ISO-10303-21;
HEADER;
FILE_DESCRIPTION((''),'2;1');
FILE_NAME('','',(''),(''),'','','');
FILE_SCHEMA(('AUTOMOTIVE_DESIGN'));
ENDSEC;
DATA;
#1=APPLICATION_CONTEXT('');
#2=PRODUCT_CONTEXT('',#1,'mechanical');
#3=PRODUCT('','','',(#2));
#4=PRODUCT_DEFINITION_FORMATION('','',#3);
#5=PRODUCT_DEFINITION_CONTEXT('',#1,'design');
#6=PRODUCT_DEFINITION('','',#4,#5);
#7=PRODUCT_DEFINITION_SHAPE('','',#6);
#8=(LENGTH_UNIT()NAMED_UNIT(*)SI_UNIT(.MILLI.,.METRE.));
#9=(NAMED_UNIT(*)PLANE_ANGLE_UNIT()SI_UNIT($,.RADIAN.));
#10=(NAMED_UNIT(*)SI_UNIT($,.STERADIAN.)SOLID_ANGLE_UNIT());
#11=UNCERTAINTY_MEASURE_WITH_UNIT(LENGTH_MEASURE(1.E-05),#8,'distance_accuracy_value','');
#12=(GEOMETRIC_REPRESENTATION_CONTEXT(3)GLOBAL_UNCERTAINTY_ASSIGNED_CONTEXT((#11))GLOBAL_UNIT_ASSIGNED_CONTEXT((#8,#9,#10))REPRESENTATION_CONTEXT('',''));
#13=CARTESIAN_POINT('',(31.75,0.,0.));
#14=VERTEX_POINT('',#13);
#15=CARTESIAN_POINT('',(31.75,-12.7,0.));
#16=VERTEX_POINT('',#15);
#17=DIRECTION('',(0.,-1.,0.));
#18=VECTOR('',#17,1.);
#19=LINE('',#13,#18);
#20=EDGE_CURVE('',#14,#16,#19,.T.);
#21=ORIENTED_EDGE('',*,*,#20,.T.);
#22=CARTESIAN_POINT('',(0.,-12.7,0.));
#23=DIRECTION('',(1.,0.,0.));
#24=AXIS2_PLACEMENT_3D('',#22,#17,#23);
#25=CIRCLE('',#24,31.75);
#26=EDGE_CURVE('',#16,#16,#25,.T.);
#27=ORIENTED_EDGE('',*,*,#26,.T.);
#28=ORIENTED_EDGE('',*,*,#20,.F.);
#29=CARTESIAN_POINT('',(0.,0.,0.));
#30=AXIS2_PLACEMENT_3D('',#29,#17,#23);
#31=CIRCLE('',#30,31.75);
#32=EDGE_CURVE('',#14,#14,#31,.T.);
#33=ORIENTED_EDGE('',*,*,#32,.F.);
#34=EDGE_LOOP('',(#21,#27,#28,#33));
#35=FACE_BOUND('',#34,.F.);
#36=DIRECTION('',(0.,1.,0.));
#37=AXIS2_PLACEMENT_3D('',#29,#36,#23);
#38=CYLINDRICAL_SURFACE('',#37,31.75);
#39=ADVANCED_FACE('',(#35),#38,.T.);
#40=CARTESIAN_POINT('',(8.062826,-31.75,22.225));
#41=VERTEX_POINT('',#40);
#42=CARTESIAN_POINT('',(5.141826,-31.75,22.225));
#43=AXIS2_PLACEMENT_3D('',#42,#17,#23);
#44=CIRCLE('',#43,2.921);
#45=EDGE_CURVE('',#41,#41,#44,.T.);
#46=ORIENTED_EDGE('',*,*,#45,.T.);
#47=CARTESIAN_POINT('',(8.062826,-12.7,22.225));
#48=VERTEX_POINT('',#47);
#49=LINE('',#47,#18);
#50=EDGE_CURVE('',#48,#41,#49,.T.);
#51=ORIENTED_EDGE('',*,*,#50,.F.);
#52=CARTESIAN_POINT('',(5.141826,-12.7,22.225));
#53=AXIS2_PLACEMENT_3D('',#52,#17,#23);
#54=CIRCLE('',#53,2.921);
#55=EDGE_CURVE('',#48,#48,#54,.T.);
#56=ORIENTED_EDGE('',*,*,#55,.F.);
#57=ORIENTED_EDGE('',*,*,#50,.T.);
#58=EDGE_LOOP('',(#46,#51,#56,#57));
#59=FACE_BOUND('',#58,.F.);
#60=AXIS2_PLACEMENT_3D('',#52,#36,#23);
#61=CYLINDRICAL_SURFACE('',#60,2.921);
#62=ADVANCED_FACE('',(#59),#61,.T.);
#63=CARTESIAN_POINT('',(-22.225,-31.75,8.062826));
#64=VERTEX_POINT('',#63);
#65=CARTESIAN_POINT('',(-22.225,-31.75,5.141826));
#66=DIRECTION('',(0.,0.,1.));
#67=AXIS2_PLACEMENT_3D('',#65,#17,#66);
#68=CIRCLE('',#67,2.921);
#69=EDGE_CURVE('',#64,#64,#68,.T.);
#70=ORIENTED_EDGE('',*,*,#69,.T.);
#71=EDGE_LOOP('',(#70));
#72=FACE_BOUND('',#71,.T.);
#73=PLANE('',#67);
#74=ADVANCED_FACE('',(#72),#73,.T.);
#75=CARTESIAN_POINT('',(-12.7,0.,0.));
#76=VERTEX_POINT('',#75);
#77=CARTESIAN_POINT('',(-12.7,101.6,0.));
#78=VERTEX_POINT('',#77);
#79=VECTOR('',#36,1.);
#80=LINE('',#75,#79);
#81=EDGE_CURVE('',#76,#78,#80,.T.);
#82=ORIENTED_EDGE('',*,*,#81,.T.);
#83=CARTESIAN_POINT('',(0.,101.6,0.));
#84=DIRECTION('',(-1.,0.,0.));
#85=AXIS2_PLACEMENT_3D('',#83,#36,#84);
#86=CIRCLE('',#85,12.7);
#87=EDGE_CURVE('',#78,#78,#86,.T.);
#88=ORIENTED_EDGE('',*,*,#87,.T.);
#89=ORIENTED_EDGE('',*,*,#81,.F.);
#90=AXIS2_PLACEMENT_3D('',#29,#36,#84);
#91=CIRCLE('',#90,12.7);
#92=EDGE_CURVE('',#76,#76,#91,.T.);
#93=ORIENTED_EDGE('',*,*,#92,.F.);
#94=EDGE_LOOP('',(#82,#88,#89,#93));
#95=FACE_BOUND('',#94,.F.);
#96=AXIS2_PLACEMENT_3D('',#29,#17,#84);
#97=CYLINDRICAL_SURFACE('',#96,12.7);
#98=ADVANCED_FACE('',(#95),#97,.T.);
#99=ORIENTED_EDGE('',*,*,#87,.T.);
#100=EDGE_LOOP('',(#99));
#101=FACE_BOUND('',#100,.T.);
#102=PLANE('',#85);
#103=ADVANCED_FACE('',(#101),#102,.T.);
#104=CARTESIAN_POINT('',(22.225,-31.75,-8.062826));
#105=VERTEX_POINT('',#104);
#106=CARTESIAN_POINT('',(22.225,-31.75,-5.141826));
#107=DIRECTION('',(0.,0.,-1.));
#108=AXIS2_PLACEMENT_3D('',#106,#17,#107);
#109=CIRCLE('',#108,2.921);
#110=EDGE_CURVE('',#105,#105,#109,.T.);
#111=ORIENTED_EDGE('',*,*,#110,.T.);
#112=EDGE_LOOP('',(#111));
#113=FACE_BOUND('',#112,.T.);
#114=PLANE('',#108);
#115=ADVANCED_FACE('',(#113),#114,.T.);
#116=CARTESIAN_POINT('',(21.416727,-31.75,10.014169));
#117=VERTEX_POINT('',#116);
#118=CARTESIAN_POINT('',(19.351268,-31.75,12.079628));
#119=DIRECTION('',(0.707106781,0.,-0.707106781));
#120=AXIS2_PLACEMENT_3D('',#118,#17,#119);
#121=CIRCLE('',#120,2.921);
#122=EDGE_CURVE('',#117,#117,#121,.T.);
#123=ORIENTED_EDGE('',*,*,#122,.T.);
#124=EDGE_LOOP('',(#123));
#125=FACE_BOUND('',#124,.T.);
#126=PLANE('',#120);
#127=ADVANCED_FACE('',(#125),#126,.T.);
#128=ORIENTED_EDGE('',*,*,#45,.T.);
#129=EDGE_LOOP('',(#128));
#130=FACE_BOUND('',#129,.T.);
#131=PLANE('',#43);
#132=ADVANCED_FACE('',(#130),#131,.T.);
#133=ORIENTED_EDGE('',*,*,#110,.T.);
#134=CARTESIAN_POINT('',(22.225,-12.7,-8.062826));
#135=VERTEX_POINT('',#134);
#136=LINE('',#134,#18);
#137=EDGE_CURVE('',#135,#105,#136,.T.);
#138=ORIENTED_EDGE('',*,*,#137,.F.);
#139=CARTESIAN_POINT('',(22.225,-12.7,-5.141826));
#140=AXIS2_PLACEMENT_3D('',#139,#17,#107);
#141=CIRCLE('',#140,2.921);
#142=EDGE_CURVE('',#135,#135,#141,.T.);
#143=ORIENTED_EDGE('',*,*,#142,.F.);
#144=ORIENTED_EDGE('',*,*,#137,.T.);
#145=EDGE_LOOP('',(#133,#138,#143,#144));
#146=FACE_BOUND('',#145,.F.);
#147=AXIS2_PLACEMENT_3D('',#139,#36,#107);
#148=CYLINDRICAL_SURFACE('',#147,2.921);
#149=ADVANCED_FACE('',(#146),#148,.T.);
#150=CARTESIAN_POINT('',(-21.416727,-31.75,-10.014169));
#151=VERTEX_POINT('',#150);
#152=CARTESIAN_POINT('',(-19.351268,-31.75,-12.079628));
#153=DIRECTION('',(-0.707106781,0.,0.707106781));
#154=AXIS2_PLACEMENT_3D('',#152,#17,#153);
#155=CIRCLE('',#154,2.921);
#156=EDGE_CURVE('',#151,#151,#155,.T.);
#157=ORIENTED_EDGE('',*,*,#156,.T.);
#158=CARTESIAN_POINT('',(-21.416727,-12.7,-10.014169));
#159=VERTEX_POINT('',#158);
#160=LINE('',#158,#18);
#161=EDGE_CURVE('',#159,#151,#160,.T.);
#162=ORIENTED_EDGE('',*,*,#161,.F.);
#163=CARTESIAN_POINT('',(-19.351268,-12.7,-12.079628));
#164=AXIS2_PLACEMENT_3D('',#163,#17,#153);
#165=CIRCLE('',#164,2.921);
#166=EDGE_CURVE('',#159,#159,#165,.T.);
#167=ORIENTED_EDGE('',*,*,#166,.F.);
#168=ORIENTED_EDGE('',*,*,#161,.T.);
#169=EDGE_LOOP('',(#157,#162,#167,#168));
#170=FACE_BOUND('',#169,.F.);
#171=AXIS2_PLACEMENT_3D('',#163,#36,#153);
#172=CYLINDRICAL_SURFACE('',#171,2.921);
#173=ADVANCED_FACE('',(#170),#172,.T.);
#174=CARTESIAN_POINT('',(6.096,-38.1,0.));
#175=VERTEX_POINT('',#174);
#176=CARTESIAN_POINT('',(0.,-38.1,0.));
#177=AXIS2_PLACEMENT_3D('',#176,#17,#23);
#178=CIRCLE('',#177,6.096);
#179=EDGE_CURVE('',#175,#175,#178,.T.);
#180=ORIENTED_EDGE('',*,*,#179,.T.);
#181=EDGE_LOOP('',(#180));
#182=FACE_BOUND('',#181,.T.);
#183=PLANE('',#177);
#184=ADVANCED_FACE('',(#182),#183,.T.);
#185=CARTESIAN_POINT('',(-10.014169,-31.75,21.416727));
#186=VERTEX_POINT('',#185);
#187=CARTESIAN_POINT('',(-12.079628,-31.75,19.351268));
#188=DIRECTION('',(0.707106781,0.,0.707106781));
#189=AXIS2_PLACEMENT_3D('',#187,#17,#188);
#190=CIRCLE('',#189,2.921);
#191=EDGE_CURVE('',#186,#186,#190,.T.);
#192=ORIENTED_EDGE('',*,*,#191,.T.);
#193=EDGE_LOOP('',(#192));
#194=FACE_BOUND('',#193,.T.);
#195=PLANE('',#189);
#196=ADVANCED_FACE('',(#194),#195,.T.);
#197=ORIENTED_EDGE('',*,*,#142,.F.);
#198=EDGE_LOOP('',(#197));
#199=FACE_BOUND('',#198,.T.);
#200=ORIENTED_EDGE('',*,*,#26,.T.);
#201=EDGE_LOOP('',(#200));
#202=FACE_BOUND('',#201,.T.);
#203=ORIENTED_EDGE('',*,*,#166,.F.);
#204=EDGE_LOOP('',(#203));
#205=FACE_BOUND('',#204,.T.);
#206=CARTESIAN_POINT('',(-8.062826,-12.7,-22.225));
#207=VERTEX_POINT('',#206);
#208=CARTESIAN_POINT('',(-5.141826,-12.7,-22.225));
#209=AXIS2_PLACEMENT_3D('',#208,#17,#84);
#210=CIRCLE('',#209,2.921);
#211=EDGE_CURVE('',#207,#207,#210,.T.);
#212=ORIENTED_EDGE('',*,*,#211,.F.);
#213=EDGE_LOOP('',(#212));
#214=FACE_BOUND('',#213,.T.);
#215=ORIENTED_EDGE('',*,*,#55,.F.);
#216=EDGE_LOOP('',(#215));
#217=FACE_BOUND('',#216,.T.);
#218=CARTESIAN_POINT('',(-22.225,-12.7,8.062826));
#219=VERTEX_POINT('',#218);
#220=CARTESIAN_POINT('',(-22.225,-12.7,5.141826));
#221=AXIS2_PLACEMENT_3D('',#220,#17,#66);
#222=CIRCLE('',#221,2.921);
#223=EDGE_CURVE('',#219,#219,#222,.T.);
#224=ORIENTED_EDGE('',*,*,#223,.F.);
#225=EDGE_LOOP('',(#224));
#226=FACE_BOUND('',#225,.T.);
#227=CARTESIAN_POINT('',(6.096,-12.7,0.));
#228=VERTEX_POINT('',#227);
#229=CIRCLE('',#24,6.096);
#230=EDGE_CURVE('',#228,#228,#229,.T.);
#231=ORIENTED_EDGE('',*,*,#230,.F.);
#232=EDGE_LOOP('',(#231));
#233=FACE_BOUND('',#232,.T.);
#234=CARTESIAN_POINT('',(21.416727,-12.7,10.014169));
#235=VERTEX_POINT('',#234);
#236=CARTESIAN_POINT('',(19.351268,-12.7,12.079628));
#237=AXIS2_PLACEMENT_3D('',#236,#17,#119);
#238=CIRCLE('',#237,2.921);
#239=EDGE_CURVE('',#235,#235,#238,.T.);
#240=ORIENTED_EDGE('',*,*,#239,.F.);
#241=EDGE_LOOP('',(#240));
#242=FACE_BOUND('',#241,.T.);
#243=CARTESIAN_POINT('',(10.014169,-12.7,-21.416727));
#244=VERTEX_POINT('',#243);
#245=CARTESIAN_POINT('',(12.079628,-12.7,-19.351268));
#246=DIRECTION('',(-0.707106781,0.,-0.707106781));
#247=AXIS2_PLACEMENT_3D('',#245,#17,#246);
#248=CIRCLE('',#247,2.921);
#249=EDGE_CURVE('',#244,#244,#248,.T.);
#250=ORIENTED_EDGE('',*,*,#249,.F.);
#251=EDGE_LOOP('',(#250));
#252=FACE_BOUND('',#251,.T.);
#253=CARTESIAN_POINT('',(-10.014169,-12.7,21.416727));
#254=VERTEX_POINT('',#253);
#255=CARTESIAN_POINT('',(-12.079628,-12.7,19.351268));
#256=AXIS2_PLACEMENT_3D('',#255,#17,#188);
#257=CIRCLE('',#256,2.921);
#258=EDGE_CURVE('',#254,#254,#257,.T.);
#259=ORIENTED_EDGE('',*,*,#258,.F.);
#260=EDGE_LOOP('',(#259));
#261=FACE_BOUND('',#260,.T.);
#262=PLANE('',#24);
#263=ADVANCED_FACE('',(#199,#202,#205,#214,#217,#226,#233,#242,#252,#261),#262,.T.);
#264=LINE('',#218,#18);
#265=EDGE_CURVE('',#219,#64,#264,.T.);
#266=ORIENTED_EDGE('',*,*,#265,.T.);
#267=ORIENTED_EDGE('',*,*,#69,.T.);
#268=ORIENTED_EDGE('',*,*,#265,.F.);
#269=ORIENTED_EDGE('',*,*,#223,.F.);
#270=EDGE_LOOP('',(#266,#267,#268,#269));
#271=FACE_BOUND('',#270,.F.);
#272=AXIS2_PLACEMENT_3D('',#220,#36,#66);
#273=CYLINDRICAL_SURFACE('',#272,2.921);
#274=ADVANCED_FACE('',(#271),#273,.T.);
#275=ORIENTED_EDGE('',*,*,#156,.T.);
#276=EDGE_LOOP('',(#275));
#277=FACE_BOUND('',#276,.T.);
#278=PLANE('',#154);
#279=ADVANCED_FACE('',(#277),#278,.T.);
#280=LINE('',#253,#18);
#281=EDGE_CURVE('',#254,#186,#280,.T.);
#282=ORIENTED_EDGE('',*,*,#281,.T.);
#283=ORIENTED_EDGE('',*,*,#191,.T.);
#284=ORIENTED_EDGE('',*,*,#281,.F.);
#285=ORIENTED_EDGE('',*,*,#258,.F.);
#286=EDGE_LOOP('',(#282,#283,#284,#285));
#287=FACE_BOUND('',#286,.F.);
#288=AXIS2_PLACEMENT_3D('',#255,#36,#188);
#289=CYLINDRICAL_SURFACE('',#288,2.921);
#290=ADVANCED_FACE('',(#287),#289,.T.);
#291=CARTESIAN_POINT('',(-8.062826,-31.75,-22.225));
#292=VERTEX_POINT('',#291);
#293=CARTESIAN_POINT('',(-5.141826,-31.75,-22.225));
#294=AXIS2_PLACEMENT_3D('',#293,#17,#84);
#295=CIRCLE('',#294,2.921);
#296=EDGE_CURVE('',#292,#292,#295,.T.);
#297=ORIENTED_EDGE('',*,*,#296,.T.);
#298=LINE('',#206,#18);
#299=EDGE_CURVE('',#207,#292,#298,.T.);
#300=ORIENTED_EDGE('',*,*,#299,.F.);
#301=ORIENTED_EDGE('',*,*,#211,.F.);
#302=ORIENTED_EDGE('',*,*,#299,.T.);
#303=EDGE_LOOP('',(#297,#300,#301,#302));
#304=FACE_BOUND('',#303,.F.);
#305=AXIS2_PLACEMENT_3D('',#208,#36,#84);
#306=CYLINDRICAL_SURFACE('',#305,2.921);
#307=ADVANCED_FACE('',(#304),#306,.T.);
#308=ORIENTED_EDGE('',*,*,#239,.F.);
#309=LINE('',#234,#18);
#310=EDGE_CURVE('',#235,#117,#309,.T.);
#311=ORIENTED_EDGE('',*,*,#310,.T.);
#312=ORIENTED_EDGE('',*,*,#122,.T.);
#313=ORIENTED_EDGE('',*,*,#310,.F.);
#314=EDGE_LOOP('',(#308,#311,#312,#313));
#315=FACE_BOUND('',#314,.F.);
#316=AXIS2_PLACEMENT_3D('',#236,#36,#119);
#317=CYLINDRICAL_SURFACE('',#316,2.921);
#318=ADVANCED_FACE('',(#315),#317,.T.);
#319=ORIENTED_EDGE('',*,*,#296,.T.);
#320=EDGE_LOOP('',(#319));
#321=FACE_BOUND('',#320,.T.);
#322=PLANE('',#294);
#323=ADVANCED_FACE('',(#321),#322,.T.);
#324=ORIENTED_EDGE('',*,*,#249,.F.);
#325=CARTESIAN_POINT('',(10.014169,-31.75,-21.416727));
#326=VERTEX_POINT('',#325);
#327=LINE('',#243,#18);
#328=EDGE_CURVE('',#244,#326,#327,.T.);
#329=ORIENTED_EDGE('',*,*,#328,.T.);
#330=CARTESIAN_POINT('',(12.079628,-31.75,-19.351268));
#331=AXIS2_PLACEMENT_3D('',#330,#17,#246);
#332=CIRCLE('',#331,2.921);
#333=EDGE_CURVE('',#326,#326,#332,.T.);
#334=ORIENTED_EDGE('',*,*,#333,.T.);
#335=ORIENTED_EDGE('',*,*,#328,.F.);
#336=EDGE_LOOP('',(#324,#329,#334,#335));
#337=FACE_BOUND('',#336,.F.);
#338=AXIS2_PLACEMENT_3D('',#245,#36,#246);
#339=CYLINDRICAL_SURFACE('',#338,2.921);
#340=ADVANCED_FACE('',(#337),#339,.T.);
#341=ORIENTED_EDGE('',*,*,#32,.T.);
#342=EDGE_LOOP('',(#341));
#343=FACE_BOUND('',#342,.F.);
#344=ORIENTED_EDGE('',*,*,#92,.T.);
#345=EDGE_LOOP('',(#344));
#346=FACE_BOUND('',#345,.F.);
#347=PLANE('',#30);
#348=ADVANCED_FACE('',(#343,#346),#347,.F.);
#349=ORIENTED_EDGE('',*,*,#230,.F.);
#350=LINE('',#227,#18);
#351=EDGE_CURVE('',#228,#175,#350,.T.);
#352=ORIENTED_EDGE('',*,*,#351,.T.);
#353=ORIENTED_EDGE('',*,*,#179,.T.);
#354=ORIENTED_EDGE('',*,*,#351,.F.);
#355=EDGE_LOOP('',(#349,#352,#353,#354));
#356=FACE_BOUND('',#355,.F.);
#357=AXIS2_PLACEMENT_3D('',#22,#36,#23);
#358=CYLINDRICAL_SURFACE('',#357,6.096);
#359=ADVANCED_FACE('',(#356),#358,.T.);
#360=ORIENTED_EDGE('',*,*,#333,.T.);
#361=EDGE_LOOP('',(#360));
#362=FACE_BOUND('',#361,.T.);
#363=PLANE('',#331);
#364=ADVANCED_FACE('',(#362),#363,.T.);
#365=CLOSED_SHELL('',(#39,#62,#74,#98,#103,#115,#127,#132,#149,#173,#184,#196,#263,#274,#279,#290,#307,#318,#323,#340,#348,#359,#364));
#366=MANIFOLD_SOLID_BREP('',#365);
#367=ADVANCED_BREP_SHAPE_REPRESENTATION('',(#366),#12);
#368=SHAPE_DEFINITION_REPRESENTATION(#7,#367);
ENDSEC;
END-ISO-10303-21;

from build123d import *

# Parameters (mm, degrees)
F0_R            = 31.75
F1_DEPTH        = 12.7
F3_R            = 6.096
F4_DEPTH        = 25.4
F5_R            = 2.921
F6_DEPTH        = 19.05
F6_COPIES_COUNT = 8
F9_R            = 12.7
F10_DEPTH       = 101.6


# Not quite as in the source:
# - a pattern or mirror of a feature is missing from the dataset's text; its kind, count and spacing are read off the source's solid
# - the program builds the solid bodies; features that only make, move or delete a surface that nothing else refers to are left out


with BuildPart() as f1:
    # F0 (on Front) → F1 (new body)
    with BuildSketch(Plane.XZ):
        Circle(F0_R)
    extrude(amount=F1_DEPTH)

    # F3 (on face) → F4 (join)
    with BuildSketch(Plane.XZ.offset(12.7)):
        Circle(F3_R)
    extrude(amount=F4_DEPTH)

    # F5 (on face) → F6 (join)
    with BuildSketch(Plane.XZ.offset(12.7)):
        with Locations((5.1418263465, 22.225)):
            Circle(F5_R)
    f6 = extrude(amount=F6_DEPTH)

    # F6_copies: F6 ×8 about axis
    f6_copies_axis = Axis((0, 0, 0), (0, 1, 0))
    for i in range(1, F6_COPIES_COUNT):
        add(f6.rotate(f6_copies_axis, i * 360 / F6_COPIES_COUNT))

    # F9 (on face) → F10 (join)
    with BuildSketch(Plane(origin=(0, 0, 0), x_dir=(-1, 0, 0), z_dir=(0, 1, 0))):
        Circle(F9_R)
    extrude(amount=F10_DEPTH)


solid = f1.part
